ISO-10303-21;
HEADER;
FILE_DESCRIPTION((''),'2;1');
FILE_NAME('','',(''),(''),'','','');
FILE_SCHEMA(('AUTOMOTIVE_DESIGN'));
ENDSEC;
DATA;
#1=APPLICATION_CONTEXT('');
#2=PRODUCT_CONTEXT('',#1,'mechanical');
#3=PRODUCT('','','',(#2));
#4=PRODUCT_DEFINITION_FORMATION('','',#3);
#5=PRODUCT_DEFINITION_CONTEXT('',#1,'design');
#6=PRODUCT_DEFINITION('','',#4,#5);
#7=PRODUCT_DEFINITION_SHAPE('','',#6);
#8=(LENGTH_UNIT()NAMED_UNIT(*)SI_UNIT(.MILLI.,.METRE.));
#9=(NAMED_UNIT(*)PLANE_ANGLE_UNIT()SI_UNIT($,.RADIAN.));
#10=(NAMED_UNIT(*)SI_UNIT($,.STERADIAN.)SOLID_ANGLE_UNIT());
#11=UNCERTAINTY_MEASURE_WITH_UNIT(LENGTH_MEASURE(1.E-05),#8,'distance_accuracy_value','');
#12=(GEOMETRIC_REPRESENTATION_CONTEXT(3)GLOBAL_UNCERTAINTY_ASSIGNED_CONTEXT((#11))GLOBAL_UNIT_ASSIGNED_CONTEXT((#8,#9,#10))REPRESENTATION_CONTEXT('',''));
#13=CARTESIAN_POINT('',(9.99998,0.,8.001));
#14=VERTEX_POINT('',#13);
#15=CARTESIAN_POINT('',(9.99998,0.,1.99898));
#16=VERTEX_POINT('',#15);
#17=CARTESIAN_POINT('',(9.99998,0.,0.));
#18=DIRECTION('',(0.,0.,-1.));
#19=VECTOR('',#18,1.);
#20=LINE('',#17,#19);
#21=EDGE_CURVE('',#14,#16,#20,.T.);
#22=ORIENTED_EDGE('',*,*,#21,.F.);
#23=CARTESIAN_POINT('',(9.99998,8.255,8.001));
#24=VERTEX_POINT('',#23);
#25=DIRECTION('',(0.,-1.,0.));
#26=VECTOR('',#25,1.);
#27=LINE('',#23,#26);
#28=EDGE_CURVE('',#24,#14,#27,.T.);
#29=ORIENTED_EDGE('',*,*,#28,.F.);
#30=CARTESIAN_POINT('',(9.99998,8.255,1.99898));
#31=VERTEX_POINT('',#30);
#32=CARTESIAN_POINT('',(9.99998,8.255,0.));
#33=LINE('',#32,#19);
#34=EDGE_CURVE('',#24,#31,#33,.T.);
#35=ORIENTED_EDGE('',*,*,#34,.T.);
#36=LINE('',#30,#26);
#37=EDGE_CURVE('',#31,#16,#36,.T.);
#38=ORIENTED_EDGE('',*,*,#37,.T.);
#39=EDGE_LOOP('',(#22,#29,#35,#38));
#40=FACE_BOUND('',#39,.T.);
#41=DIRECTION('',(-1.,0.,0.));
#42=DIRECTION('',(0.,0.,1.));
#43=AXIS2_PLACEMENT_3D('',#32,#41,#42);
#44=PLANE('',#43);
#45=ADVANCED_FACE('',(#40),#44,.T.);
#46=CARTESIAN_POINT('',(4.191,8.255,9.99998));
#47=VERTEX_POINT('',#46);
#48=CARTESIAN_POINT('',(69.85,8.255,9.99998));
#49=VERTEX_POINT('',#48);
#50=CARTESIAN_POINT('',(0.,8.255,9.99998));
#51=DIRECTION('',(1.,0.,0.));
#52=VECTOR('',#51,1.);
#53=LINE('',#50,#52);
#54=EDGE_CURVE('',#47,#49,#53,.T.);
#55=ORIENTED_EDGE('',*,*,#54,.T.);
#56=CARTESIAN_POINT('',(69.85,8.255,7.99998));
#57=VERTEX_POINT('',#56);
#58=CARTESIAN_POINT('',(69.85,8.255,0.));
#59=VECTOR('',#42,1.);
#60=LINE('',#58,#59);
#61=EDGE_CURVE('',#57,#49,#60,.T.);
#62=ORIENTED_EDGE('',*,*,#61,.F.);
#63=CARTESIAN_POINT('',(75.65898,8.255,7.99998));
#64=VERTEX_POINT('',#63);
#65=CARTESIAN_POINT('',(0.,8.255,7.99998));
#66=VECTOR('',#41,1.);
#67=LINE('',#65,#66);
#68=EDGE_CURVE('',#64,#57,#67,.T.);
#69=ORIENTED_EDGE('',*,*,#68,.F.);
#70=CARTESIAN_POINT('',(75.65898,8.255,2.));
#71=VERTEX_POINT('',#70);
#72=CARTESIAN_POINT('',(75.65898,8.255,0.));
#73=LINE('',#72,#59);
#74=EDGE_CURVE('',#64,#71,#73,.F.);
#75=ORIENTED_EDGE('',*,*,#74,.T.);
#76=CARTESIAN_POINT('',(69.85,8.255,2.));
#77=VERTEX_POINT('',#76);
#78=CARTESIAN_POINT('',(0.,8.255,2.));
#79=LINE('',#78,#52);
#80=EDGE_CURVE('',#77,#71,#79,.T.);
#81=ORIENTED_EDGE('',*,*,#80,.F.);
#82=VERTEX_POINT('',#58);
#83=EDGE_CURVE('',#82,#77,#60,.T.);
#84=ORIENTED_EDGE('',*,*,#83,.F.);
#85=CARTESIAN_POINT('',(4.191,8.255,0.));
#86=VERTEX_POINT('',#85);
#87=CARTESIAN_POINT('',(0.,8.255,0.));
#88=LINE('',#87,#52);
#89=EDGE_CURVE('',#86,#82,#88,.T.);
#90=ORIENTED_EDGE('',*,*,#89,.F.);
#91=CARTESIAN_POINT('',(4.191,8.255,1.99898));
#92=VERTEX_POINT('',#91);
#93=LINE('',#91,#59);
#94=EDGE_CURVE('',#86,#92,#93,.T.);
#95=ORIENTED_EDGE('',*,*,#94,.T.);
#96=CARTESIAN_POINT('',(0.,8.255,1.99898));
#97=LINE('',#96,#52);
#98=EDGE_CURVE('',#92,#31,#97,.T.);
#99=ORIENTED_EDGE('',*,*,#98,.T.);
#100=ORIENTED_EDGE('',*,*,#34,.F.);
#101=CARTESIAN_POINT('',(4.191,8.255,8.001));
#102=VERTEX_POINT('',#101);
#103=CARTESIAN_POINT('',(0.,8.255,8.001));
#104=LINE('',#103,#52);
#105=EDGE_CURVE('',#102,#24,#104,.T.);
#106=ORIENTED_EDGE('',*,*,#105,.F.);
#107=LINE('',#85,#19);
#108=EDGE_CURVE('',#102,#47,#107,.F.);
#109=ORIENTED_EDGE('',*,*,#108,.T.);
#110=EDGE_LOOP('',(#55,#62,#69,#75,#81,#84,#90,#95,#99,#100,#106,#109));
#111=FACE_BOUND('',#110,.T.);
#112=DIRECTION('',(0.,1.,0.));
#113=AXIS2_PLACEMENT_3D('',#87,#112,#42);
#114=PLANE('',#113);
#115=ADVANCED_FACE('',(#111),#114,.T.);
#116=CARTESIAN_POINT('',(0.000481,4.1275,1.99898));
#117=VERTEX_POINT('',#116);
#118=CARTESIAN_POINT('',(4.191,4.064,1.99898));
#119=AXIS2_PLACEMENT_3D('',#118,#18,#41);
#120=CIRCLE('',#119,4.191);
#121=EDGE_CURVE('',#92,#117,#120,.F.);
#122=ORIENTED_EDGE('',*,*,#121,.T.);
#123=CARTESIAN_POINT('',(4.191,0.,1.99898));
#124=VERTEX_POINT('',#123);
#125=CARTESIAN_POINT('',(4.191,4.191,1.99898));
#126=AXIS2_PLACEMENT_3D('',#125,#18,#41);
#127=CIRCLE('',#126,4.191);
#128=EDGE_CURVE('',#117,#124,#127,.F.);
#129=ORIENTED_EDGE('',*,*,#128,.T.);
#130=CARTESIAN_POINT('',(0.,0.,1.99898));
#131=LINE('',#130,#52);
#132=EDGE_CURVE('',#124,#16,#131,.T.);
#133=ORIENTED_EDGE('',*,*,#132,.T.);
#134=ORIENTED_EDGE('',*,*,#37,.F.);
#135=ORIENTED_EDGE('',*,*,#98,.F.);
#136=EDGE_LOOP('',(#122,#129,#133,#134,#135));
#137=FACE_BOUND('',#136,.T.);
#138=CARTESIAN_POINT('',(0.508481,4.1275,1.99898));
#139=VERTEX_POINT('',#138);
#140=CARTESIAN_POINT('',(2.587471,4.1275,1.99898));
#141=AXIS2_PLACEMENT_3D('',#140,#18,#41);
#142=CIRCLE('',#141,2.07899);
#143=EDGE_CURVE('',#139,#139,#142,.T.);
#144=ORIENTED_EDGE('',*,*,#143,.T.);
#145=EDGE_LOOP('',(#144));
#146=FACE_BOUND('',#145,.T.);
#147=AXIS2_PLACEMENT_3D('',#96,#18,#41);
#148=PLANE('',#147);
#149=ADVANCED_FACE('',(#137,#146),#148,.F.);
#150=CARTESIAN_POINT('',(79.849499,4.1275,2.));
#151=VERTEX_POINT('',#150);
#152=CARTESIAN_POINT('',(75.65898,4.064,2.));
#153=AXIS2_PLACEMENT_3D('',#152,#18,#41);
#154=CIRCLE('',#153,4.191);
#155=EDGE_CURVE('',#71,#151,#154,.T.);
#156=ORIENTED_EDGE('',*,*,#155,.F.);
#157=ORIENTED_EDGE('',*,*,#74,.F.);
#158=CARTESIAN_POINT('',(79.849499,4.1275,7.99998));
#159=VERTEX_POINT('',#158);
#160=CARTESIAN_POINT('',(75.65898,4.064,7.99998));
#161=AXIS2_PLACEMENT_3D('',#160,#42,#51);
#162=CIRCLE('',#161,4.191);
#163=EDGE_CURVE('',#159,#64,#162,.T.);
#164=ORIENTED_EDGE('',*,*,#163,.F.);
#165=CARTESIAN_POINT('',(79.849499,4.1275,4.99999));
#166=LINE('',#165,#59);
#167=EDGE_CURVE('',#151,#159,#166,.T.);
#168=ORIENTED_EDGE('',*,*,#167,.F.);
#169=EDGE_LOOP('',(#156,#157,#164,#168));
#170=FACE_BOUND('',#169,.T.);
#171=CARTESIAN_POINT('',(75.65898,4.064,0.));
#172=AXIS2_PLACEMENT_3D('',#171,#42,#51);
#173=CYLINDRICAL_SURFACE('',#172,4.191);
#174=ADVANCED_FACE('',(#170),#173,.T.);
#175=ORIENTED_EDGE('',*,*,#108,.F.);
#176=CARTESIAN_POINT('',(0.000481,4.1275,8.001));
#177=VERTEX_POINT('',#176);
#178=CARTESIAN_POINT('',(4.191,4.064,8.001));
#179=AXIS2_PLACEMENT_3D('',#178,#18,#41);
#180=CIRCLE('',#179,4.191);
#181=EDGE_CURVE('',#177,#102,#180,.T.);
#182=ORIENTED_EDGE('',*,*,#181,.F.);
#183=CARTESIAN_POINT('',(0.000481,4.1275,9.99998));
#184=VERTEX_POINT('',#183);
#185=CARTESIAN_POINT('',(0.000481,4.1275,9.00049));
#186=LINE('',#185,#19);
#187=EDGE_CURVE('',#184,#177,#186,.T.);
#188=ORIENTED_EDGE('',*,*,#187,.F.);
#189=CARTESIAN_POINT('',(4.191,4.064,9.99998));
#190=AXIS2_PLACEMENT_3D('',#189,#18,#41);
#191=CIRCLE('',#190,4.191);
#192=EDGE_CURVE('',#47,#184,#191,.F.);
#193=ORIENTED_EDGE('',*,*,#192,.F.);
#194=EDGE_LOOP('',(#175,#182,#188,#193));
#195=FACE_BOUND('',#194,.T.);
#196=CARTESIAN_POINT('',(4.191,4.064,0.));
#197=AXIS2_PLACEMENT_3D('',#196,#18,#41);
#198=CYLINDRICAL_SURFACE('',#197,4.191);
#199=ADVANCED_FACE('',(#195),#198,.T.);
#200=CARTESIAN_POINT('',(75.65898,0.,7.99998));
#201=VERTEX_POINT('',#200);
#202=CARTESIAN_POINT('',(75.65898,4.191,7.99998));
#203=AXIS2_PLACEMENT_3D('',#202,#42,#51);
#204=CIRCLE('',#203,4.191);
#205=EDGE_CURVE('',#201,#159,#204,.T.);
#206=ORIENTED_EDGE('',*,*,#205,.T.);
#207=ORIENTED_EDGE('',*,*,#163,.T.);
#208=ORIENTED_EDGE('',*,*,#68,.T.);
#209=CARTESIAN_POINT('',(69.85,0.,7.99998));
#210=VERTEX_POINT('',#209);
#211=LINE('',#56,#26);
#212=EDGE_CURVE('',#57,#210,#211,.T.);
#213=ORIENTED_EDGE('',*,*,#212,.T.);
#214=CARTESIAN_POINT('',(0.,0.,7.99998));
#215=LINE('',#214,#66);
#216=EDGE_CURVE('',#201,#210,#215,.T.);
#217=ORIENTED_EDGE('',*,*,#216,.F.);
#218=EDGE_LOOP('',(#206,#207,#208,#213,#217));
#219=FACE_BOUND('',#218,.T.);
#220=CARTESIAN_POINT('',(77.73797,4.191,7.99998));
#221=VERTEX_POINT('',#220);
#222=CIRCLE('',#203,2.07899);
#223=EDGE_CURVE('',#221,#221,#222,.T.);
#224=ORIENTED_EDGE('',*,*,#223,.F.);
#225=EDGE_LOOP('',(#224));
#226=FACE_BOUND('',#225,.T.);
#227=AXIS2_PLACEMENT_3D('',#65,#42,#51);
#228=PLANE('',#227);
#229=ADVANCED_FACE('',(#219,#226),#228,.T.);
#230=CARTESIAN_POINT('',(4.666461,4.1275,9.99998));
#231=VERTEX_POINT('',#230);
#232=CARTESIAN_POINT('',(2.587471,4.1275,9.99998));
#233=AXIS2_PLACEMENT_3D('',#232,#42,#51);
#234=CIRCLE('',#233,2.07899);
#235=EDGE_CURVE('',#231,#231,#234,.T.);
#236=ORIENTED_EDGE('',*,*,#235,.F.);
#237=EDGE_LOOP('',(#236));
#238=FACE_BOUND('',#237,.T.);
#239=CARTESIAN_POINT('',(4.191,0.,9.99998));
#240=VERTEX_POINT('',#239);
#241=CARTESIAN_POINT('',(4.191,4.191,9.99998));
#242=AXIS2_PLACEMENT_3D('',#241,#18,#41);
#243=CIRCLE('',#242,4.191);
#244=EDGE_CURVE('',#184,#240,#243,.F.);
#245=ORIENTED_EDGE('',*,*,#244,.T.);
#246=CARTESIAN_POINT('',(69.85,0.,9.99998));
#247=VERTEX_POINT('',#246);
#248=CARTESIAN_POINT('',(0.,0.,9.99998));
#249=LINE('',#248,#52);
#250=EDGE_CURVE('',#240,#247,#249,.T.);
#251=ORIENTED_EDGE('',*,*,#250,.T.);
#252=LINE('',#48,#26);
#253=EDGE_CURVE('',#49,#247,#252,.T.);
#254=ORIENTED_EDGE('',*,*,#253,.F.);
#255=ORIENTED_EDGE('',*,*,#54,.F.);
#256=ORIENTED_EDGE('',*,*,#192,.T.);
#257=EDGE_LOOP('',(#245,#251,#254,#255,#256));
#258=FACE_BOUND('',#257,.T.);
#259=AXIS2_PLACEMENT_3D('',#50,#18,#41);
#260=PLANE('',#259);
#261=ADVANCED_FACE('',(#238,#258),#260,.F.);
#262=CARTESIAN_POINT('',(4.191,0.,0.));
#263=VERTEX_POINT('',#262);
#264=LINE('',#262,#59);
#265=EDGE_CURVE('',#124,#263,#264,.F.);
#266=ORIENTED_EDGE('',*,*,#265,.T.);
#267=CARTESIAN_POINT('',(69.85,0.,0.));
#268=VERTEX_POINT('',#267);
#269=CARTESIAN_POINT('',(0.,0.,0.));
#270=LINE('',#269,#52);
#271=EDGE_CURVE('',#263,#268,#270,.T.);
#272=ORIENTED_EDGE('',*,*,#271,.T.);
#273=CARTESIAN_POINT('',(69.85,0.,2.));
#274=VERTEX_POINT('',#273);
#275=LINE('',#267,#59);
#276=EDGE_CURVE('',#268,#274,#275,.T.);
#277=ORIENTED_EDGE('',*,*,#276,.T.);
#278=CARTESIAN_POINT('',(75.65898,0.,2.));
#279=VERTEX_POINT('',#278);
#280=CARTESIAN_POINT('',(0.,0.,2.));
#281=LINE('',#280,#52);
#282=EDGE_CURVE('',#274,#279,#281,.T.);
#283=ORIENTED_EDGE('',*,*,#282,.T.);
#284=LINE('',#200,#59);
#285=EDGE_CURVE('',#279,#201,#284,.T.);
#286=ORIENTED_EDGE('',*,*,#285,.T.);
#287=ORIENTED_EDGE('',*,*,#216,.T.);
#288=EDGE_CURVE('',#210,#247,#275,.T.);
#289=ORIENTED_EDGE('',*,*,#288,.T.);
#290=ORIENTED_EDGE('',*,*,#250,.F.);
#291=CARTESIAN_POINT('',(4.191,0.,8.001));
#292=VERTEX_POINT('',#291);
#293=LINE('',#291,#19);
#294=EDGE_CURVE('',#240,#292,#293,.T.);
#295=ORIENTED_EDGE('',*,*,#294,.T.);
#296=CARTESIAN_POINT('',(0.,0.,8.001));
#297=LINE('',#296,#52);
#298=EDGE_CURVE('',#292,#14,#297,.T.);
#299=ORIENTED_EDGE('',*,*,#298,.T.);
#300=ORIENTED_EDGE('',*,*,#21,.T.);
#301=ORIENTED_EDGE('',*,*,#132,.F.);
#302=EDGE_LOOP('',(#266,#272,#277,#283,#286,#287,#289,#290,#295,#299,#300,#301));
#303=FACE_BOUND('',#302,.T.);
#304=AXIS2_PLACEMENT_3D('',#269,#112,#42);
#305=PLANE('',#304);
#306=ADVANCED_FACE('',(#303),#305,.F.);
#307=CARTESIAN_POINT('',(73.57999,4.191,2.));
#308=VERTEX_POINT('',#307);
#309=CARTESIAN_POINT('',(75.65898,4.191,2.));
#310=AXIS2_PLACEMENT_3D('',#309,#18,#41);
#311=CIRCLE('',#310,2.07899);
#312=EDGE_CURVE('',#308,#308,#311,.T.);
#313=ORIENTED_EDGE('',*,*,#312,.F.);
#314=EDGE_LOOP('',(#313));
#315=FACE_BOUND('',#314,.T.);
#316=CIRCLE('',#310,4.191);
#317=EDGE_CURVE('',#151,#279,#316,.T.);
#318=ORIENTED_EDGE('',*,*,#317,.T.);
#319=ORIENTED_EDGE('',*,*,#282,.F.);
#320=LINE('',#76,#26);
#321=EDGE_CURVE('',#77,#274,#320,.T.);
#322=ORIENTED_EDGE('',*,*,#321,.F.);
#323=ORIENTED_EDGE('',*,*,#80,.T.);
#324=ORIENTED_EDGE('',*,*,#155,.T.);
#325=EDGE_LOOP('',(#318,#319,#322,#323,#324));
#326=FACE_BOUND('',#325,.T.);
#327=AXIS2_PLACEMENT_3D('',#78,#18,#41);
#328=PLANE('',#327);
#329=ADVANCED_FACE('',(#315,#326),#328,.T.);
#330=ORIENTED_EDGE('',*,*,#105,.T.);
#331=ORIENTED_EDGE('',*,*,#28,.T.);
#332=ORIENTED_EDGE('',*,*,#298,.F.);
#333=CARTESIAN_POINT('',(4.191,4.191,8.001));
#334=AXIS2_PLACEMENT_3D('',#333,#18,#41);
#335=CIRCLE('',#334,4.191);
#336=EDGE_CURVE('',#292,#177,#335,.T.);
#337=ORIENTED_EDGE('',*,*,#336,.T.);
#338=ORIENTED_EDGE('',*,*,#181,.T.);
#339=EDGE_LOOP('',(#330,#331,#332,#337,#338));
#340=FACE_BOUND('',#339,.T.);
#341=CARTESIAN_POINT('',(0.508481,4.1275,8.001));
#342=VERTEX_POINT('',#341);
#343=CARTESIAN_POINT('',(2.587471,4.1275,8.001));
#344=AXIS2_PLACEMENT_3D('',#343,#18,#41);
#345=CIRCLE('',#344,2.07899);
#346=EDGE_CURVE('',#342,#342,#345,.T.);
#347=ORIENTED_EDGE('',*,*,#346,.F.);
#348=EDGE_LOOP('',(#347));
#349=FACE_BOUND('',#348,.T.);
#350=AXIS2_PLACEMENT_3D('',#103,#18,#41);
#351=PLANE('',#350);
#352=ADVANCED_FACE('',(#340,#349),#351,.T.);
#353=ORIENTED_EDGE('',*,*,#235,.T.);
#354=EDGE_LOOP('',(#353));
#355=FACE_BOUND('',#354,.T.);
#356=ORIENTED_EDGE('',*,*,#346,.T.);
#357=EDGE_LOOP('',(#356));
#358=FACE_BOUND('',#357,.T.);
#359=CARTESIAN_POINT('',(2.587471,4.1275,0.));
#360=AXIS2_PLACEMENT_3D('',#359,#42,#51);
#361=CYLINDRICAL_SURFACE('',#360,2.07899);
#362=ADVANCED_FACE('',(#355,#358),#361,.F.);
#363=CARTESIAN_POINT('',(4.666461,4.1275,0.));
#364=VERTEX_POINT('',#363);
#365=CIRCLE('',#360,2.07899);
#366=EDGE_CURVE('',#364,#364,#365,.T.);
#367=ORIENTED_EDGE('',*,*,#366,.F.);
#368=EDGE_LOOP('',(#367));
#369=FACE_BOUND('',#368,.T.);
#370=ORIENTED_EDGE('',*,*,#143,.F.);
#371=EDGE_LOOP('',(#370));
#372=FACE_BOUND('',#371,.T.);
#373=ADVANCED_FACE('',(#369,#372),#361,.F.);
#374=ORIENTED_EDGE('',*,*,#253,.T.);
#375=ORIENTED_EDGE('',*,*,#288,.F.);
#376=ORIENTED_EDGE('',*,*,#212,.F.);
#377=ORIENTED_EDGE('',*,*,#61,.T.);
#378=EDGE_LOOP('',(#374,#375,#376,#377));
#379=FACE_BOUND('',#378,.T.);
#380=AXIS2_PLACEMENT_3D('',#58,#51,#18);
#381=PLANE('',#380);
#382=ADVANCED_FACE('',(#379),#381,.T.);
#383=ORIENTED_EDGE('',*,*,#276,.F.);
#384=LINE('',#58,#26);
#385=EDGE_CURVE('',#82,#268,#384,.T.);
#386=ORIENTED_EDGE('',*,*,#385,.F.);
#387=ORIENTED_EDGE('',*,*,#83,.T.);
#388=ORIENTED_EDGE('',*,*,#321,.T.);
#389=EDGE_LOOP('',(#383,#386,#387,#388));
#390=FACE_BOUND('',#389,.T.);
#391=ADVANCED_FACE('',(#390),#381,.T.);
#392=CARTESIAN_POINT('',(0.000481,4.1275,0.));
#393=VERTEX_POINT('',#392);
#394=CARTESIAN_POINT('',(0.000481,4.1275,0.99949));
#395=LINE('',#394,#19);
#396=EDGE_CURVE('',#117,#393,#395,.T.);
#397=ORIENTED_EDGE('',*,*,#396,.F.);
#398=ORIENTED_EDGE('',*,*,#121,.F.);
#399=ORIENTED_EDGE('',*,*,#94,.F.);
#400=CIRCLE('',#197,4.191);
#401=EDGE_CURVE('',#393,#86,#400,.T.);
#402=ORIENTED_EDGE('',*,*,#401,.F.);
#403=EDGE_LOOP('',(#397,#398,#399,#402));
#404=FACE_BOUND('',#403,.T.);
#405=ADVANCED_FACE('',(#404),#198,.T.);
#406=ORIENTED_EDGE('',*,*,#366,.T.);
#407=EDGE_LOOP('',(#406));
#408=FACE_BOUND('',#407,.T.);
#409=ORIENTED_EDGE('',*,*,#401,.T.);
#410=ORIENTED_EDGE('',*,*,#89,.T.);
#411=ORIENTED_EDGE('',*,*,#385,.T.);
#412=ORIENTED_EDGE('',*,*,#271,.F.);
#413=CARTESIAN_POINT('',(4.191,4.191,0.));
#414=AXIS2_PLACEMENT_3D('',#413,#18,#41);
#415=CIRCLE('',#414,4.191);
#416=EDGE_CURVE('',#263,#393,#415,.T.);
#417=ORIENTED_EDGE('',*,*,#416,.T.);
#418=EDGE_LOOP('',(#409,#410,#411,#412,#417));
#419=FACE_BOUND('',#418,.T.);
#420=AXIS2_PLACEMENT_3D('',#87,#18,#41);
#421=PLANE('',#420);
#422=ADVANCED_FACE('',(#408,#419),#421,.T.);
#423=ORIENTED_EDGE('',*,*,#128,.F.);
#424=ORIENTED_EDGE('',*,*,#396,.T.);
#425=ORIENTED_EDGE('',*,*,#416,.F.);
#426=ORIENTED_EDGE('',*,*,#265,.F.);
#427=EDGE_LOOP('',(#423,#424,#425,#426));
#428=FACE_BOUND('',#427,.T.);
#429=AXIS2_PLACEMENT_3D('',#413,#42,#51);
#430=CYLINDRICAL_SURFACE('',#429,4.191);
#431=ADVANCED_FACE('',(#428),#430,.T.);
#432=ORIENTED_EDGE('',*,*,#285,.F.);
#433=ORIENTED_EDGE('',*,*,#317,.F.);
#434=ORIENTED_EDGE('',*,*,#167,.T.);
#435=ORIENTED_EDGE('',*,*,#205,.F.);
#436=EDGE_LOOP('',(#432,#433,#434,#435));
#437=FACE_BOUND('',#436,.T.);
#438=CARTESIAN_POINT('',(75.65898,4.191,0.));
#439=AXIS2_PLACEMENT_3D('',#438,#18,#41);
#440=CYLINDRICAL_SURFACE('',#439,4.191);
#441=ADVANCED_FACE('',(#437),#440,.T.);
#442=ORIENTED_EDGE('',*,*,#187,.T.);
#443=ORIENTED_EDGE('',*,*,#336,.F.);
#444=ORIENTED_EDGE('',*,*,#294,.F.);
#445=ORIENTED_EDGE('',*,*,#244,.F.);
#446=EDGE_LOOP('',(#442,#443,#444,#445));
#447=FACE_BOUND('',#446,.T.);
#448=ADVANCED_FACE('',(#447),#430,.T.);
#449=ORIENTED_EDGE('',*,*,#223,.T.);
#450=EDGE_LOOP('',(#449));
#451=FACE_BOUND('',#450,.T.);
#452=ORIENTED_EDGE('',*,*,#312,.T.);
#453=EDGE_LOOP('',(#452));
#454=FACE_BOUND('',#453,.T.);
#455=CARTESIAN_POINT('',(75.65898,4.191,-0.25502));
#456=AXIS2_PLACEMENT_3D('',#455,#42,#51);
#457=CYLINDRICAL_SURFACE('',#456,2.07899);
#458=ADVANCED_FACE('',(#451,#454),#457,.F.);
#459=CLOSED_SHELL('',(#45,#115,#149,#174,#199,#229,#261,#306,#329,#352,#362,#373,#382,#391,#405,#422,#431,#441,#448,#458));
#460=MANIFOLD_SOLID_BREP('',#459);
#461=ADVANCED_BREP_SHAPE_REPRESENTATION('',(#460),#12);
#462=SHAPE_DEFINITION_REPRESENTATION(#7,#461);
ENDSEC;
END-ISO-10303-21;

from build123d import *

# Parameters (mm, degrees)
BOSS_EXTRUDE1_DEPTH = 8.255
FILLET1_R           = 4.191
SKETCH2_R           = 2.07899
CUT_EXTRUDE1_DEPTH  = 81.896006892
FILLET2_R           = 4.191
SKETCH3_R           = 2.07899
CUT_EXTRUDE2_DEPTH  = 8.255


with BuildPart() as part:
    # Sketch1 → Boss-Extrude1 (new body)
    with BuildSketch(Plane(origin=(0, 0, 0), x_dir=(1, 0, 0), z_dir=(0, 1, 0))):
        Polygon((69.85, -7.99998), (69.85, -9.99998), (0, -9.99998), (0, -8.001), (9.99998, -8.001), (9.99998, -1.99898), (0, -1.99898), (0, 0), (69.85, 0), (69.85, -2), (79.84998, -2), (79.84998, -7.99998), align=None)
    extrude(amount=BOSS_EXTRUDE1_DEPTH)

    # Fillet1
    # the kernel refuses this fillet: 4.191 mm, written as the material it takes off along each edge
    with BuildSketch(Plane(origin=(0, 0, 12.47648), x_dir=(0, 1, 0), z_dir=(0, 0, -1)), Plane(origin=(0, 0, 20.47748), x_dir=(0, 1, 0), z_dir=(0, 0, -1))) as fillet1_piece_1:
        with BuildLine():
            CenterArc((FILLET1_R, FILLET1_R), FILLET1_R, 180, 90)
            Line((0, FILLET1_R), (0, 0))
            Line((0, 0), (FILLET1_R, 0))
        make_face()
    extrude(amount=22.95398, mode=Mode.SUBTRACT)
    with BuildSketch(Plane(origin=(0, 8.255, 12.47648), x_dir=(0, -1, 0), z_dir=(0, 0, -1)), Plane(origin=(0, 8.255, 20.47748), x_dir=(0, -1, 0), z_dir=(0, 0, -1))) as fillet1_piece_2:
        with BuildLine():
            CenterArc((FILLET1_R, -FILLET1_R), FILLET1_R, 90, 90)
            Line((0, -FILLET1_R), (0, 0))
            Line((0, 0), (FILLET1_R, 0))
        make_face()
    extrude(amount=22.95398, mode=Mode.SUBTRACT)

    # Sketch2 → Cut-Extrude1 (cut, through all)
    with BuildSketch(Plane.XY.offset(9.99998)):
        with Locations((2.587471088, 4.1275)):
            Circle(SKETCH2_R)
    extrude(amount=-CUT_EXTRUDE1_DEPTH, mode=Mode.SUBTRACT)

    # Fillet2
    # the kernel refuses this fillet: 4.191 mm, written as the material it takes off along each edge
    with BuildSketch(Plane(origin=(79.84998, 0, -8.4775), x_dir=(-1, 0, 0), z_dir=(0, 0, 1))) as fillet2_piece_1:
        with BuildLine():
            CenterArc((FILLET2_R, -FILLET2_R), FILLET2_R, 90, 90)
            Line((0, -FILLET2_R), (0, 0))
            Line((0, 0), (FILLET2_R, 0))
        make_face()
    extrude(amount=26.95498, mode=Mode.SUBTRACT)
    with BuildSketch(Plane(origin=(79.84998, 8.255, -8.4775), x_dir=(-1, 0, 0), z_dir=(0, 0, 1))) as fillet2_piece_2:
        with BuildLine():
            CenterArc((FILLET2_R, FILLET2_R), FILLET2_R, 180, 90)
            Line((0, FILLET2_R), (0, 0))
            Line((0, 0), (FILLET2_R, 0))
        make_face()
    extrude(amount=26.95498, mode=Mode.SUBTRACT)

    # Sketch3 → Cut-Extrude2 (cut)
    with BuildSketch(Plane.XY.offset(7.99998)):
        with Locations((75.65898, 4.191)):
            Circle(SKETCH3_R)
    extrude(amount=-CUT_EXTRUDE2_DEPTH, mode=Mode.SUBTRACT)


solid = part.part
